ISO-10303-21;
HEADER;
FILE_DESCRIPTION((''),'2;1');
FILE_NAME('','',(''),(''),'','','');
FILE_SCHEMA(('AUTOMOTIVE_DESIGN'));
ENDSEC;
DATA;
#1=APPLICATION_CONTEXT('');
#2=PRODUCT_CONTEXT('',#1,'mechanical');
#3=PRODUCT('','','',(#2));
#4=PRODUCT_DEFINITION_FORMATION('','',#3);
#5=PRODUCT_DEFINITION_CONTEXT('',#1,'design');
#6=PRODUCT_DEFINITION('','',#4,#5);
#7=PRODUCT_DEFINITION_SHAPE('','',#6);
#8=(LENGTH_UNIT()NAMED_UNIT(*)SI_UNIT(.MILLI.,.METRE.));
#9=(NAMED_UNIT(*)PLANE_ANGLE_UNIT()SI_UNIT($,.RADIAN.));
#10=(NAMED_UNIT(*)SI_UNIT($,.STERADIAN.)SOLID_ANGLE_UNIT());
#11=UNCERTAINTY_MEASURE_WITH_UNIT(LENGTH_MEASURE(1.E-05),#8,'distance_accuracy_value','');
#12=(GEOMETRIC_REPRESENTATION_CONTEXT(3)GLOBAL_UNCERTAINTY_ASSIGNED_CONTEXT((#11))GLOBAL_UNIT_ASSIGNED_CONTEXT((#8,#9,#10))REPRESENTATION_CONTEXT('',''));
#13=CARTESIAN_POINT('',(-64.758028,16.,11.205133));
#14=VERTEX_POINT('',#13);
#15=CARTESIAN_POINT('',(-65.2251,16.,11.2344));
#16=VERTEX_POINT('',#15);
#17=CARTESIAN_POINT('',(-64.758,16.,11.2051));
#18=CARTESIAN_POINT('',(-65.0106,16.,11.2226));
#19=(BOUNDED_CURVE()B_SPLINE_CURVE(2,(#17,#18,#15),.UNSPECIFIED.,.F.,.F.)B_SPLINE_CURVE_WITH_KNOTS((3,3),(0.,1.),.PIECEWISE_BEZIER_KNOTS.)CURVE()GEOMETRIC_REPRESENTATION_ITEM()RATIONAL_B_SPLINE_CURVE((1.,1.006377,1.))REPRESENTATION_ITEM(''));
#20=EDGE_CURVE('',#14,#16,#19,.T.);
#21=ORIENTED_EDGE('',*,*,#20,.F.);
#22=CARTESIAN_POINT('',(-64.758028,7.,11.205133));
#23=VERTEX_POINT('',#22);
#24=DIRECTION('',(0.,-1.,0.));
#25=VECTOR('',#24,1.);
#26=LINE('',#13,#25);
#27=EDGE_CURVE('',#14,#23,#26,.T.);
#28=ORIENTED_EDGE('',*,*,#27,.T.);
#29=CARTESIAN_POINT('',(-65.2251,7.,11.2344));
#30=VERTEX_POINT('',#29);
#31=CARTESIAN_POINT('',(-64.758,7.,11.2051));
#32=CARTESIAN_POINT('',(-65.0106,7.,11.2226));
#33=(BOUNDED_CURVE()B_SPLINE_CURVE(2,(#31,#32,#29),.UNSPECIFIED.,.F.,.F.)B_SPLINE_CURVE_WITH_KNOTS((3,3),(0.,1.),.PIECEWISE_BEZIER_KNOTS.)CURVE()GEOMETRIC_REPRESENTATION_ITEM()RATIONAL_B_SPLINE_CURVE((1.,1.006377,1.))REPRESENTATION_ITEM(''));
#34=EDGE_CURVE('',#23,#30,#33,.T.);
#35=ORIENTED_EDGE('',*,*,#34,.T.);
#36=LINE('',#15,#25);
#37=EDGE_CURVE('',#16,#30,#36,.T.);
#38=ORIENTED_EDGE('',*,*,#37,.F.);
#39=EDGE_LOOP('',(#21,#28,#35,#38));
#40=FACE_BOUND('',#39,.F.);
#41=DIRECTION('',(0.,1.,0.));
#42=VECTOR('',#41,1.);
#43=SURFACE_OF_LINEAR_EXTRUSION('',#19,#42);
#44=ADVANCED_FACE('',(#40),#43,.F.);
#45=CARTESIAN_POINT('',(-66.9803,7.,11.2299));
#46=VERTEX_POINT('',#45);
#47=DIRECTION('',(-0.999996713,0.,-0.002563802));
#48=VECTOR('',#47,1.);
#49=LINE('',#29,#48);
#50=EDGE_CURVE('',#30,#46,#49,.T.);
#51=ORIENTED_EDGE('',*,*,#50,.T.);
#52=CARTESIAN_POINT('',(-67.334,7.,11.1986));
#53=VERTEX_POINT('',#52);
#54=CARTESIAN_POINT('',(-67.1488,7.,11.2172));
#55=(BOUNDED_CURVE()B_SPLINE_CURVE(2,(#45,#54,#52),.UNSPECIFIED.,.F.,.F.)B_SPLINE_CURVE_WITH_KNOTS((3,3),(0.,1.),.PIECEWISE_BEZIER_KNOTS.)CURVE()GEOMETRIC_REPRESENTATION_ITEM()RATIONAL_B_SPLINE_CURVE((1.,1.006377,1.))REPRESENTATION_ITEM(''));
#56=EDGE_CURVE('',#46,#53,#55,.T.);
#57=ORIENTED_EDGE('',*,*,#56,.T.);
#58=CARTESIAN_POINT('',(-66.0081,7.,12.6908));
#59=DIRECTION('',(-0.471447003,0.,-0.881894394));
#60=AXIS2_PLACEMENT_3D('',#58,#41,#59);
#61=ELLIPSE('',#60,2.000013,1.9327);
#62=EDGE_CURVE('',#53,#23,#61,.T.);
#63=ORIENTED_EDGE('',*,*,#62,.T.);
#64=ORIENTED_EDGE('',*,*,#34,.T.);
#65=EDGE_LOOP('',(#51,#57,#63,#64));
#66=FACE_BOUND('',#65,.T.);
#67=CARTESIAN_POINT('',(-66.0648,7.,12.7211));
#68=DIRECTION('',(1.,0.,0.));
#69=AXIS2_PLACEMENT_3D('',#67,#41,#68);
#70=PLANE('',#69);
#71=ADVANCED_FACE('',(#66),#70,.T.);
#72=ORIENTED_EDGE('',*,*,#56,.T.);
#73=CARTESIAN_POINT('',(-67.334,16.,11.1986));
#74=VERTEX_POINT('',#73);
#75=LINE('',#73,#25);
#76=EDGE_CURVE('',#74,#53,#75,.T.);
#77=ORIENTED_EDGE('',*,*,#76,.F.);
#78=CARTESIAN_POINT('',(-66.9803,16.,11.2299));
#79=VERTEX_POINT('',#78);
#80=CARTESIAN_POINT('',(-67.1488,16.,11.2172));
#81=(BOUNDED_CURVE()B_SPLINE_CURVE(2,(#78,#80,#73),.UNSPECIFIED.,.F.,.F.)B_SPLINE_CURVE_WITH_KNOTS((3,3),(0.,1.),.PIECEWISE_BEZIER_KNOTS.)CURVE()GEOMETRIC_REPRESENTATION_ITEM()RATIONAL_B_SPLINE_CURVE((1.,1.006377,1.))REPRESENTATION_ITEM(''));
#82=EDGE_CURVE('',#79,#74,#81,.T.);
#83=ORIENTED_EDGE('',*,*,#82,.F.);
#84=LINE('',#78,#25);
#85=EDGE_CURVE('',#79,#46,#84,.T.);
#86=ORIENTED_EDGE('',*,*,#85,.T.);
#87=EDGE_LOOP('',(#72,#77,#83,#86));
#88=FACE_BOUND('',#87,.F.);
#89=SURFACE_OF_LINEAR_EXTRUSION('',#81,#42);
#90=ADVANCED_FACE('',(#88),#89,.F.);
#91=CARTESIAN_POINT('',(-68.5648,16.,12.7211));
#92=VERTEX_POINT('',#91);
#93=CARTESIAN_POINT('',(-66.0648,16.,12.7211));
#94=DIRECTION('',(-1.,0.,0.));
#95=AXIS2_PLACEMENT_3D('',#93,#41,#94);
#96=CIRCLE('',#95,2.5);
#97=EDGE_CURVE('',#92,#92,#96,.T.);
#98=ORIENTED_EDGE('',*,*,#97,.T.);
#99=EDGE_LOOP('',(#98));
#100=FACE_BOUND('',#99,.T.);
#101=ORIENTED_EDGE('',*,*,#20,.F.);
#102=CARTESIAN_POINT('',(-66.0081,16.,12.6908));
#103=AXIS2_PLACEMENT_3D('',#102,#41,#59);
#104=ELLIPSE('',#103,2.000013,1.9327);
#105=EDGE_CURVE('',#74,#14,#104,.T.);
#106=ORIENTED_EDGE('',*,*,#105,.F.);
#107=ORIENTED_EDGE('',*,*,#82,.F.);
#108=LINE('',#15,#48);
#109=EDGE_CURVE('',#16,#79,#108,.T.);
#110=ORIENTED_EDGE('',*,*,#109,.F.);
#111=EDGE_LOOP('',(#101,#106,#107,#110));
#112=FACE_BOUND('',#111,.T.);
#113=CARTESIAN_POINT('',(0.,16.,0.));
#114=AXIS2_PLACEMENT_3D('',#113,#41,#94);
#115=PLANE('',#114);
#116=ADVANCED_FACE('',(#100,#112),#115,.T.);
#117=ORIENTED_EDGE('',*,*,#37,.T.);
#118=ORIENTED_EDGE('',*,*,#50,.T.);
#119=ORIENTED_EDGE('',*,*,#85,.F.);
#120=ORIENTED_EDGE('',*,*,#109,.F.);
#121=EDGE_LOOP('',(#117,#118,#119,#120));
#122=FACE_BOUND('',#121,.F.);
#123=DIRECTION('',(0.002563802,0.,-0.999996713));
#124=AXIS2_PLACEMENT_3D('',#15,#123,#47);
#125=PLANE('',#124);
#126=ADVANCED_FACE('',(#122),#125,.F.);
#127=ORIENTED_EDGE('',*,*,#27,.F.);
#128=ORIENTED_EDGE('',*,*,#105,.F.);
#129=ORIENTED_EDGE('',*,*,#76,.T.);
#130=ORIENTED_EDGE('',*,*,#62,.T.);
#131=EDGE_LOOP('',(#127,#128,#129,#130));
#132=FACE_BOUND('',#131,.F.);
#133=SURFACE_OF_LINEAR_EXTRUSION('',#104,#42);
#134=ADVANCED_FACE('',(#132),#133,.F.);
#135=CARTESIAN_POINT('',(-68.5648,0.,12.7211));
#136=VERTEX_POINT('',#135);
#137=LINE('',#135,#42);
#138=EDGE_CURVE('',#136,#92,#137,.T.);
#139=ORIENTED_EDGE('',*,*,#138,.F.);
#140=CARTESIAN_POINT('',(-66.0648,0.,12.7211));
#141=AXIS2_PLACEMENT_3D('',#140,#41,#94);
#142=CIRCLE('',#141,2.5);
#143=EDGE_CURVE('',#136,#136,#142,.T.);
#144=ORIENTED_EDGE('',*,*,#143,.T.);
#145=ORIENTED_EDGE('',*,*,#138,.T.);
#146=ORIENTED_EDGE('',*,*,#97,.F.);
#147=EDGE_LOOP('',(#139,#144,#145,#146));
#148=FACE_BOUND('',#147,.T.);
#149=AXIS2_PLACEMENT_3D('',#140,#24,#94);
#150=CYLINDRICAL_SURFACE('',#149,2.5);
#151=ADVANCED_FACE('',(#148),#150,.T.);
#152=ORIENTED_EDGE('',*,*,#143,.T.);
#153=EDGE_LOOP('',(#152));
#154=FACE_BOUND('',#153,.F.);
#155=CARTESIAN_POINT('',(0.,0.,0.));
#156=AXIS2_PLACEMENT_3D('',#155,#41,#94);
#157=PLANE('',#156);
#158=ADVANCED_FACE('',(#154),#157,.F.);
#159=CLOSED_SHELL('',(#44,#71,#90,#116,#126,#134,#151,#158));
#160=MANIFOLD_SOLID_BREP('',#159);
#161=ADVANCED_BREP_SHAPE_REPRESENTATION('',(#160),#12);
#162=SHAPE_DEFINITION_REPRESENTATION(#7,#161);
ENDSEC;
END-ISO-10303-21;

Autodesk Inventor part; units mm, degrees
ref_plane "YZ Plane" through (0, 0, 0) normal (1, 0, 0) x (0, 1, 0)
ref_plane "XZ Plane" through (0, 0, 0) normal (0, 1, 0) x (-1, 0, 0)
ref_plane "XY Plane" through (0, 0, 0) normal (0, 0, 1) x (1, 0, 0)
sketch "Sketch1" plane through (0, 0, 0) normal (0, 1, 0) x (-1, 0, 0)
  circle A0 centre (66.0648, 12.7211) radius 2.5 projected
  circle A1 centre (66.0648, 12.7211) radius 2.5
  point P0 (0, 0)
  dimension "d7" = 5
extrude "Extrusion1" add sketch "Sketch1" along normal blind 16
sketch "Sketch2" plane through (-66.0648, 16, 12.7211) normal (0, 1, 0) x (1, 0, 0)
  line L0 (0.8397, 1.4867) -> (-0.9155, 1.4912)
  ellipse E0 centre (0.0567, 0.0303) end of major axis (-0.8862, 1.7941) minor radius 1.9327 (-1.2692, 1.5225) -> (1.3068, 1.516) ccw
  spline S0 degree 2 poles (1.3068, 1.516) (1.0542, 1.4985) (0.8397, 1.4867) knots 0 0 0 1 1 1 weights 1 1.006377 1
  spline S1 degree 2 poles (-0.9155, 1.4912) (-1.084, 1.5039) (-1.2692, 1.5225) knots 0 0 0 1 1 1 weights 1 1.006377 1
  point P0 (66.0648, 12.7211)
  point P1 (-1.3518, 1.4745)
extrude "Extrusion5" cut sketch "Sketch2" against normal blind 9
properties part number "acoplador"
